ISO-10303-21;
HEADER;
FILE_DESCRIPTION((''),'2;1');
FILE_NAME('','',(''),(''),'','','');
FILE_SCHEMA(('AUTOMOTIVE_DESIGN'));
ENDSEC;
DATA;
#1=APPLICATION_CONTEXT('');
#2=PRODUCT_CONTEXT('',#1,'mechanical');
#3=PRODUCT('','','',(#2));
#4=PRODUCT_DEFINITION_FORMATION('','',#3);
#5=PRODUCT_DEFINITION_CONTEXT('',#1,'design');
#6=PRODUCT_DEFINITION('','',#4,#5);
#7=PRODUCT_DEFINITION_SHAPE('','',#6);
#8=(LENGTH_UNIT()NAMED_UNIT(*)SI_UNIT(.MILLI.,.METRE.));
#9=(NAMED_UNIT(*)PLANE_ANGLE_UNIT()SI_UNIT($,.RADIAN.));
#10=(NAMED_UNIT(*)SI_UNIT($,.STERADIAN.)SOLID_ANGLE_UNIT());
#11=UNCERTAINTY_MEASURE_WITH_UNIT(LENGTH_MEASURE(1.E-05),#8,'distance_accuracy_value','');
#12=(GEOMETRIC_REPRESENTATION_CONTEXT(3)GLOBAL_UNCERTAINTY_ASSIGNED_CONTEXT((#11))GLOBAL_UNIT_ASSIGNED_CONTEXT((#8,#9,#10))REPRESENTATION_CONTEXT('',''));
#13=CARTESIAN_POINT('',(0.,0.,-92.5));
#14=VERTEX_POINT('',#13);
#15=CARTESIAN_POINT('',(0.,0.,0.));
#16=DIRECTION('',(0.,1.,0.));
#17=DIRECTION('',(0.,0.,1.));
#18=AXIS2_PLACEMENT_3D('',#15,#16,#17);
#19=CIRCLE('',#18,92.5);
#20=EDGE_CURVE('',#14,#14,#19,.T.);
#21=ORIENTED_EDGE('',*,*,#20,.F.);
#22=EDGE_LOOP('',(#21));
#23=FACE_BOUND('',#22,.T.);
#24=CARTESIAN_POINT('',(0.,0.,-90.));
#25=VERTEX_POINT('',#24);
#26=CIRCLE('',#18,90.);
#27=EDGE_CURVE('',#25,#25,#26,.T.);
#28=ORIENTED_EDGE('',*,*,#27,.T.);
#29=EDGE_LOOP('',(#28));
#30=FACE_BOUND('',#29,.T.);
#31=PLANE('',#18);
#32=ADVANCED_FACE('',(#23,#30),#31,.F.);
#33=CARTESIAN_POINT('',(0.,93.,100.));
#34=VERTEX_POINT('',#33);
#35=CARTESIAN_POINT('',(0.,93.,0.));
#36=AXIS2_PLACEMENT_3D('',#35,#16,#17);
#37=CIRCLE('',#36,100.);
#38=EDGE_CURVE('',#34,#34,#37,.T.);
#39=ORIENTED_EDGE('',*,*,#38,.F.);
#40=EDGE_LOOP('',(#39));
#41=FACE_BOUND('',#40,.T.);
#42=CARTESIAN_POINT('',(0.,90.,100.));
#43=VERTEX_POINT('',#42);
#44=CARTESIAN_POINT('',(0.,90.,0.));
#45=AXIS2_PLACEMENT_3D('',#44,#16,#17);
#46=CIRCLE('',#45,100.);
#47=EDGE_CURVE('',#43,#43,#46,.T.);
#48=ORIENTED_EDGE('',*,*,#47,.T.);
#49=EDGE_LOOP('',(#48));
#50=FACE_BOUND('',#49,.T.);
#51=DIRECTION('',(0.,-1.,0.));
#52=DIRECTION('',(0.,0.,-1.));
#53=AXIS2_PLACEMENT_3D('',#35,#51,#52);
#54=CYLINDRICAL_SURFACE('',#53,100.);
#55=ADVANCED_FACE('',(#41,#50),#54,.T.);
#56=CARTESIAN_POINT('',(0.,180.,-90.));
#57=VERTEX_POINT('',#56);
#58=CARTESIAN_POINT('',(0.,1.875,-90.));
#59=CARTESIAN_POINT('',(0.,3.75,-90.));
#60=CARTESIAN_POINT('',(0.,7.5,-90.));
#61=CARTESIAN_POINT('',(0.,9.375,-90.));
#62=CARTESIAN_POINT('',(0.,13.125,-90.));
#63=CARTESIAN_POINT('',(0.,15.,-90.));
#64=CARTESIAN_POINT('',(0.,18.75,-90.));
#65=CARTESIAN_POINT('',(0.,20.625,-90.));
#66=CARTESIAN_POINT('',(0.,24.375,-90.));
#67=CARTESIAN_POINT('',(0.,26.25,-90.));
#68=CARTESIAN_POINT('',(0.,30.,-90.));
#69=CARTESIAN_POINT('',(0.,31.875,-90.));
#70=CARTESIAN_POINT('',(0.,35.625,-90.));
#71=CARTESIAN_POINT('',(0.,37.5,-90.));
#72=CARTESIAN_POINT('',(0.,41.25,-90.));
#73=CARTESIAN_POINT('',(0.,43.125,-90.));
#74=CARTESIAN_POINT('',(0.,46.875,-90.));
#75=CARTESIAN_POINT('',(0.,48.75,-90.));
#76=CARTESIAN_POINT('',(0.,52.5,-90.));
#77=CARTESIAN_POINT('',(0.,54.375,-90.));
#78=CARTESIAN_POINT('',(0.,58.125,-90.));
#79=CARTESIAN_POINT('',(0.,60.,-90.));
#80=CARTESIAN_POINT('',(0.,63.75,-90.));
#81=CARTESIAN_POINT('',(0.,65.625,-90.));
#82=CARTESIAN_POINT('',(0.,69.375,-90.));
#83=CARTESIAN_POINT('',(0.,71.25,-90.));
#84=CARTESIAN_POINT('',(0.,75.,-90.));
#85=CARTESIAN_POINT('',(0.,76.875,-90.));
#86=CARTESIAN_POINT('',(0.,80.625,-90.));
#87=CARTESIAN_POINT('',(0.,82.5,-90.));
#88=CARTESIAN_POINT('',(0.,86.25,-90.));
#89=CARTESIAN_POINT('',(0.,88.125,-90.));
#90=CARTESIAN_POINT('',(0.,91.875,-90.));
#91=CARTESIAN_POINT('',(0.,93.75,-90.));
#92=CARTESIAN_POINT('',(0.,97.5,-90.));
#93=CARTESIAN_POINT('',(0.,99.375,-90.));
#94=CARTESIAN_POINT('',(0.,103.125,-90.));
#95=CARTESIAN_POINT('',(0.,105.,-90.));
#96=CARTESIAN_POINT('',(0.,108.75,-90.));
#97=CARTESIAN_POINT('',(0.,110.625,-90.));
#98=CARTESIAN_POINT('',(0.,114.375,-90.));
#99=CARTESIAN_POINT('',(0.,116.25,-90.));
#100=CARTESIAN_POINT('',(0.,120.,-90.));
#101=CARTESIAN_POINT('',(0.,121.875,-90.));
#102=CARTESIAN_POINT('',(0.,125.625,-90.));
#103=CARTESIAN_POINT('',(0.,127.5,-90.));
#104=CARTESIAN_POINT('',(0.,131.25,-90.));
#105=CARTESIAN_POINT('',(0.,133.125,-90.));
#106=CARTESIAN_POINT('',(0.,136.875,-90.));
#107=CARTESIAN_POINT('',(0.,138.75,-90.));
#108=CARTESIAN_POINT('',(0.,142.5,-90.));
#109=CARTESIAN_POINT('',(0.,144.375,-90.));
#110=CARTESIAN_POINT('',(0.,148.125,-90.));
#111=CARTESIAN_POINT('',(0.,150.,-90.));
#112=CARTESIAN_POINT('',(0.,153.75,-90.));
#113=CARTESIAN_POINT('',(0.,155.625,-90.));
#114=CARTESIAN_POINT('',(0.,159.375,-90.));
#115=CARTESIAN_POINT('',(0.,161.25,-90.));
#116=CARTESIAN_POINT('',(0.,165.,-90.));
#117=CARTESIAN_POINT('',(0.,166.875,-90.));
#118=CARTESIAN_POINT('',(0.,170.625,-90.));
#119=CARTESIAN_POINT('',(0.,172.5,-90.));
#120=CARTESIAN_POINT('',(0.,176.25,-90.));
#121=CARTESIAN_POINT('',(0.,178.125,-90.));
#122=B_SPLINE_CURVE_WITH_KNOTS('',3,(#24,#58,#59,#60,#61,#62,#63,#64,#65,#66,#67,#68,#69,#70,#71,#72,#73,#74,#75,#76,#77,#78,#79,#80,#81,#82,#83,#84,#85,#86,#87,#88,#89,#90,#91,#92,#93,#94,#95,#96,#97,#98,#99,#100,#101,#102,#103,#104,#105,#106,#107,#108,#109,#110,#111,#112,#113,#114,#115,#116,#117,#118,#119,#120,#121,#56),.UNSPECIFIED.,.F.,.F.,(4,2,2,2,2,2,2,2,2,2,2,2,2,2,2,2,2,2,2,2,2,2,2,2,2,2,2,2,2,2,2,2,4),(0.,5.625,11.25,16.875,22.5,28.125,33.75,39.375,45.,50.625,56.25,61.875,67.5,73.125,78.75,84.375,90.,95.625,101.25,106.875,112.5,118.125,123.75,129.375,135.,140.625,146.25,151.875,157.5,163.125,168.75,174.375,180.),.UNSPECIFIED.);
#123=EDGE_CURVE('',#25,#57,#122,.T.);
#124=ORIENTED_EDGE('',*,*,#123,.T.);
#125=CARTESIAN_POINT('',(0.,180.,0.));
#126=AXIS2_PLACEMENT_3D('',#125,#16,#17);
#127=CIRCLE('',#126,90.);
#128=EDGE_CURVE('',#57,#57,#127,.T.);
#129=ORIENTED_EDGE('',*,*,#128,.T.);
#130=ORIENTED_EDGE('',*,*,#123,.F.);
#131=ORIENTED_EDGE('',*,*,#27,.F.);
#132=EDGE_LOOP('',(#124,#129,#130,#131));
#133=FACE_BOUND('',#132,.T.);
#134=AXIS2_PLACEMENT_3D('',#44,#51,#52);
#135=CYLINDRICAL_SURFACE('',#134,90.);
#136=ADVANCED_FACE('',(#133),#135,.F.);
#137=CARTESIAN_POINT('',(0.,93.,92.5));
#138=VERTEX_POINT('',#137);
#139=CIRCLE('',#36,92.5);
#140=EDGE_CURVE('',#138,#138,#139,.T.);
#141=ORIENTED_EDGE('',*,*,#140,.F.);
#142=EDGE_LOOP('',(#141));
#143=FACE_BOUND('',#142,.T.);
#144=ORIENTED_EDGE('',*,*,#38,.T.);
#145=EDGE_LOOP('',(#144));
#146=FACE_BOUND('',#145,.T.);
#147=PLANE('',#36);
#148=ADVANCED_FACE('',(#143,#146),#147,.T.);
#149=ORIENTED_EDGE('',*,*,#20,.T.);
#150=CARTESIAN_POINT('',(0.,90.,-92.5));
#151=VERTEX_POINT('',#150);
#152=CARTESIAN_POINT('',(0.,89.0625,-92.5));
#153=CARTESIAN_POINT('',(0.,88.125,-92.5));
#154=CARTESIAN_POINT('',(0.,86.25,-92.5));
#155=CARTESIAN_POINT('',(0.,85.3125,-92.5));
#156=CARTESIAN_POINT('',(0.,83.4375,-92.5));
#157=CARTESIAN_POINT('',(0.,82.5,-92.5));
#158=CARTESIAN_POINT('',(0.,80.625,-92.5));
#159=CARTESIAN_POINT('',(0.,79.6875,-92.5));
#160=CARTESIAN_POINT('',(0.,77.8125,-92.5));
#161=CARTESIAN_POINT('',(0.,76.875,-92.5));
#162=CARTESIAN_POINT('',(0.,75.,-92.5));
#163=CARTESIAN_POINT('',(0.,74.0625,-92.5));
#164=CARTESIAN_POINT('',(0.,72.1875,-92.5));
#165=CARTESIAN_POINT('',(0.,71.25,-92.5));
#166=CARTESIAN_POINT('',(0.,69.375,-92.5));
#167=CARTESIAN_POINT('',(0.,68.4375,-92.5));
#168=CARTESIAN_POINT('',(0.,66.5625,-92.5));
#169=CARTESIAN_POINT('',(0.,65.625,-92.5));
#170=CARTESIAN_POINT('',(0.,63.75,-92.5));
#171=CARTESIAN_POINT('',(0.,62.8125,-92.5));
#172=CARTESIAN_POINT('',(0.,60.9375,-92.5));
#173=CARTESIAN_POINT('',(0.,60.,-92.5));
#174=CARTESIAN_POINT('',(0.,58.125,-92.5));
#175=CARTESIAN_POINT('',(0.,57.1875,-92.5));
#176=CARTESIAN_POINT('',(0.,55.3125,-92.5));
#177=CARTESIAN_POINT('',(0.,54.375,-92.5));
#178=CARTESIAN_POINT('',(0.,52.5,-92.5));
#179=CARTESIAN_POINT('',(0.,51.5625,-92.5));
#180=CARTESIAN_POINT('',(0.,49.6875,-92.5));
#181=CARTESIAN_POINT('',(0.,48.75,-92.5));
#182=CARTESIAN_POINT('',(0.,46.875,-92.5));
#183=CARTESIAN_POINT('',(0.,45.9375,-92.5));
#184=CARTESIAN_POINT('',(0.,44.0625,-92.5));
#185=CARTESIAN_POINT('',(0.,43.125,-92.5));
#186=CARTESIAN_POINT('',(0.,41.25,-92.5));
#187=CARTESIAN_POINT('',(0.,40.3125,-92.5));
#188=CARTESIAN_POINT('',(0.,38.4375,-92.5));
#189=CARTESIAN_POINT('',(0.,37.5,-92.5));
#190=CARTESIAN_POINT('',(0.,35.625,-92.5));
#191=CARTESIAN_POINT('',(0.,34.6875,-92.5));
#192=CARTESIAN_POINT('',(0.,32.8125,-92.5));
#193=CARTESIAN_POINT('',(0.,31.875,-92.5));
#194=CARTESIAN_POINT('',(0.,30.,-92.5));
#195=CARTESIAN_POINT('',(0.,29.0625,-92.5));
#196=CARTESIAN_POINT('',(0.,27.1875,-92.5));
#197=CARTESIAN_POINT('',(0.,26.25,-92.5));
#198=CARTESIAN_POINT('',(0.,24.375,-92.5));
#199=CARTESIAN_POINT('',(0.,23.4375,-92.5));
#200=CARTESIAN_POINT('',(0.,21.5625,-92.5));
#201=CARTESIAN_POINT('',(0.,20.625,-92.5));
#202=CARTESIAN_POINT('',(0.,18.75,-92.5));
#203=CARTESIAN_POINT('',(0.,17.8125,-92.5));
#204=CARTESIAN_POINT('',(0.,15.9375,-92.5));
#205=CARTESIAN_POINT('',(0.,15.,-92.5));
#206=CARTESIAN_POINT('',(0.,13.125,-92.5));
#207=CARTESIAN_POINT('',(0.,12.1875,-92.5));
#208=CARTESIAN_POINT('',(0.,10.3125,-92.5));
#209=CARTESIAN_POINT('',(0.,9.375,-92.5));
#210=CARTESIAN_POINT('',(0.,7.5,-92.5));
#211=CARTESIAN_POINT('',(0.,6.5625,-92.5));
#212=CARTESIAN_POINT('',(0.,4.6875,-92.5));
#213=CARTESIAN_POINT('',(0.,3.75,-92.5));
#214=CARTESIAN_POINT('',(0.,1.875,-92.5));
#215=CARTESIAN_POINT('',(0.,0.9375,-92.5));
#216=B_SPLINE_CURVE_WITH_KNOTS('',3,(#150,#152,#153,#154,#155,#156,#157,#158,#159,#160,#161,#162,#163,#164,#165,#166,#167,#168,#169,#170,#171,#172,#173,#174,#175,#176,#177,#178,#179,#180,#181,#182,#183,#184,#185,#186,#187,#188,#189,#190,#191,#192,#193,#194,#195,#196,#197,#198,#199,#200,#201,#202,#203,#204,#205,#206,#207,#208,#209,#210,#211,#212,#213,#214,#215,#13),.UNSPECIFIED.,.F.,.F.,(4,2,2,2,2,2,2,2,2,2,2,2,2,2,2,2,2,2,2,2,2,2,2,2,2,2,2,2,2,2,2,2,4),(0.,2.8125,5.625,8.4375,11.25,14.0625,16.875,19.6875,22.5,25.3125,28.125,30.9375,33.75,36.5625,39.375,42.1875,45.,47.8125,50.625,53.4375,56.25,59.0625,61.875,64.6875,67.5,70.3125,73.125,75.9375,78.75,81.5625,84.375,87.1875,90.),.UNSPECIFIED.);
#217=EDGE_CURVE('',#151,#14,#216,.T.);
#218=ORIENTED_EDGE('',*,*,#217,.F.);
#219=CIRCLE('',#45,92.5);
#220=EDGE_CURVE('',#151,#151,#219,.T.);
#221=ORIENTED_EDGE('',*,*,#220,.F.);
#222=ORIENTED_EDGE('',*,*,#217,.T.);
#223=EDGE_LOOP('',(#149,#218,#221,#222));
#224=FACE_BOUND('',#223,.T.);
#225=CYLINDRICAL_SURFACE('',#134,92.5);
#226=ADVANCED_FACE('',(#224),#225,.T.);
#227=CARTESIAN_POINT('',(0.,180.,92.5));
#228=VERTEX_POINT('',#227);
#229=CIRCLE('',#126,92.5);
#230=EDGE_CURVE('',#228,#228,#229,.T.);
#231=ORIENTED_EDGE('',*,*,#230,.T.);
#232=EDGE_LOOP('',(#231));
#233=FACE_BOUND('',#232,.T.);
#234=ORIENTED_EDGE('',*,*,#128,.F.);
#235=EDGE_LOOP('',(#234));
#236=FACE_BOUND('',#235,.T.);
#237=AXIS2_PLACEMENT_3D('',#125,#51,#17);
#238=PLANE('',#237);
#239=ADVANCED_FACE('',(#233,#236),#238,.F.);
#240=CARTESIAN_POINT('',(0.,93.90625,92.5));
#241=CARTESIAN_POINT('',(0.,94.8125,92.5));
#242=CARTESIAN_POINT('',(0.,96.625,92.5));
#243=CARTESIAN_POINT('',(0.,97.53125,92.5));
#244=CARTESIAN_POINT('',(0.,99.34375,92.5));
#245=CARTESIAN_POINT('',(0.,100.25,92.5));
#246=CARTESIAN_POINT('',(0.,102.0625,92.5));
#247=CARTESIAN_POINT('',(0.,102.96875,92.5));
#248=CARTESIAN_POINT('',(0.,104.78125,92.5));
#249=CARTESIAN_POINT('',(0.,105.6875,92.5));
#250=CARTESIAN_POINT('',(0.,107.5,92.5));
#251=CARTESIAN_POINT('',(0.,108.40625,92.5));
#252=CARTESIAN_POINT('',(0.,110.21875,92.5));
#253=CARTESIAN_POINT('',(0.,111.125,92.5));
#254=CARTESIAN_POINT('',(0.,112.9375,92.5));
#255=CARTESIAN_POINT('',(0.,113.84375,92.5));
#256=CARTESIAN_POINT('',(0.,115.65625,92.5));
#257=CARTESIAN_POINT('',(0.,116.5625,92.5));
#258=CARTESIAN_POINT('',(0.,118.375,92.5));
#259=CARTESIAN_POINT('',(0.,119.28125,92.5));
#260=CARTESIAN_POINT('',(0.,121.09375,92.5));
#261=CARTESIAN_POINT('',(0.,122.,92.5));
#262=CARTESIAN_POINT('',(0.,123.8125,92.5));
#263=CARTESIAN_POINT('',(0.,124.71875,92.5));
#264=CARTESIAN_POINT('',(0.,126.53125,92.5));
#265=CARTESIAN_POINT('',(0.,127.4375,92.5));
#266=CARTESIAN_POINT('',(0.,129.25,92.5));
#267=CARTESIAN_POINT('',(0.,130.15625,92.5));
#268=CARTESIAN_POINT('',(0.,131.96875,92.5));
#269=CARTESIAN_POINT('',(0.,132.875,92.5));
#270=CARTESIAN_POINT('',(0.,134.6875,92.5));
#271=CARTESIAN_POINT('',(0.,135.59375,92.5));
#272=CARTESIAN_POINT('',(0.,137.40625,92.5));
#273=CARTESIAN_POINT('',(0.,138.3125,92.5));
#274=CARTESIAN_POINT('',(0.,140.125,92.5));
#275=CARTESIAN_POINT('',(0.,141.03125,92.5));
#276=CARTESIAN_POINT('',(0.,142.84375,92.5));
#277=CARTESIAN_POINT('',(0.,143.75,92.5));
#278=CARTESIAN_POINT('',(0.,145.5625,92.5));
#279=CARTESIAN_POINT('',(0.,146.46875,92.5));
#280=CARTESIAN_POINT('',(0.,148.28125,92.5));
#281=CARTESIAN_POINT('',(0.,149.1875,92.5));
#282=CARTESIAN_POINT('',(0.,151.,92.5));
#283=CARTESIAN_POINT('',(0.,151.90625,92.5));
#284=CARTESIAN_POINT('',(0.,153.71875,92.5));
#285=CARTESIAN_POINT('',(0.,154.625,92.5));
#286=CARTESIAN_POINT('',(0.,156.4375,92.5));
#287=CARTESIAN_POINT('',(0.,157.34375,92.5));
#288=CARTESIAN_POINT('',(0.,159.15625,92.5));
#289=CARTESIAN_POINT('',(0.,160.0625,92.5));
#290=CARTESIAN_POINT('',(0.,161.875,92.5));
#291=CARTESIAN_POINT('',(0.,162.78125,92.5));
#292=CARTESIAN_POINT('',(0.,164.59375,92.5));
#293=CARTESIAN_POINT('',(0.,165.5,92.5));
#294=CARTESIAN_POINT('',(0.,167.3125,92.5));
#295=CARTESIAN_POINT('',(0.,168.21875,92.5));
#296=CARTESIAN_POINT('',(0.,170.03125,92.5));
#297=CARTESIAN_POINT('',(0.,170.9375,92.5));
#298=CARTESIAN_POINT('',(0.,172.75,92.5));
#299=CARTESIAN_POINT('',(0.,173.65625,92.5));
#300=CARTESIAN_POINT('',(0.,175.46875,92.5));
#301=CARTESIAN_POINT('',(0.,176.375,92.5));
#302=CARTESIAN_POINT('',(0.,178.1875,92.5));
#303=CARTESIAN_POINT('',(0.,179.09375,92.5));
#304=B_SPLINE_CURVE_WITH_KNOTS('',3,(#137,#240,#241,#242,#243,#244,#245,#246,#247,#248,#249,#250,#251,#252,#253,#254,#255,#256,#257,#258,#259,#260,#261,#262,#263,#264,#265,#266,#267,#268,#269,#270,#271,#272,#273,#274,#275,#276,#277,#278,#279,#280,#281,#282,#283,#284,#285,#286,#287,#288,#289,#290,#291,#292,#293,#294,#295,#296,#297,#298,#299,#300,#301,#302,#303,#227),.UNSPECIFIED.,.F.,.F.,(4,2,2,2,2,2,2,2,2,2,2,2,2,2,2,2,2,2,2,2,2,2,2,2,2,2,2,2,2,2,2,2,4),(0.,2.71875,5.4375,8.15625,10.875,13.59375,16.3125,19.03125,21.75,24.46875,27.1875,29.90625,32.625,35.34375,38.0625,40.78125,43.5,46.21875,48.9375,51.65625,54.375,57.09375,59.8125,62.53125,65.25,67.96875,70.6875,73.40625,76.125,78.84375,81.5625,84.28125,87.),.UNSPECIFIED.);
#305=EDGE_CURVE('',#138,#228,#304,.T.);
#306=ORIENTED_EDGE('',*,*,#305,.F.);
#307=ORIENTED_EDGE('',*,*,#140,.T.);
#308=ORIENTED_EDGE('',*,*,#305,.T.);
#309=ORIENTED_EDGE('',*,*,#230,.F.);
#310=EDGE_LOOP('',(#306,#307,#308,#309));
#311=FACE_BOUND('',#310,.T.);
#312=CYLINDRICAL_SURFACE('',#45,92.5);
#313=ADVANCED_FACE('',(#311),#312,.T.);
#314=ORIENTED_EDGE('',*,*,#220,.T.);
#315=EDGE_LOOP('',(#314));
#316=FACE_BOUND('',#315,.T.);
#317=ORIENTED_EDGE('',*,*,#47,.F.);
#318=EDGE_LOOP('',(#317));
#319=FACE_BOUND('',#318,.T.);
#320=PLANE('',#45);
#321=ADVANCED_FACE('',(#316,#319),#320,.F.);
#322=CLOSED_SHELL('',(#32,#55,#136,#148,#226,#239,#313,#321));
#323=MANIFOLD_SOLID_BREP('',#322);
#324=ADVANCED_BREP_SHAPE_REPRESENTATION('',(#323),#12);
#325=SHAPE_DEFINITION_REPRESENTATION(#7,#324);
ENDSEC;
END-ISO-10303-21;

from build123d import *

# Parameters (mm, degrees)
SKETCH1_R           = 92.5
SKETCH1_R_2         = 90
BOSS_EXTRUDE1_DEPTH = 90
SKETCH2_R           = 100
SKETCH2_R_2         = 90
BOSS_EXTRUDE2_DEPTH = 3
MIRROR1_START       = 93
MIRROR1_OUTLINE_R   = 92.5
MIRROR1_OUTLINE_R_2 = 90
MIRROR1_DEPTH       = 87


# Read off the part's stored shape, not the designer's step: Mirror1
with BuildPart() as part:
    # Sketch1 → Boss-Extrude1 (new body)
    with BuildSketch(Plane(origin=(0, 0, 0), x_dir=(1, 0, 0), z_dir=(0, 1, 0))):
        with Locations(Location((0, 0, 0), (0, 0, 90))):
            Circle(SKETCH1_R)
        with Locations(Location((0, 0, 0), (0, 0, 90))):
            Circle(SKETCH1_R_2, mode=Mode.SUBTRACT)
    extrude(amount=BOSS_EXTRUDE1_DEPTH)

    # Sketch2 → Boss-Extrude2 (add)
    with BuildSketch(Plane(origin=(0, 90, 0), x_dir=(1, 0, 0), z_dir=(0, 1, 0))):
        with Locations(Location((0, 0, 0), (0, 0, 270))):
            Circle(SKETCH2_R)
        with Locations(Location((0, 0, 0), (0, 0, 90))):
            Circle(SKETCH2_R_2, mode=Mode.SUBTRACT)
    extrude(amount=BOSS_EXTRUDE2_DEPTH)

    # Mirror1 outline → Mirror1 (add)
    with BuildSketch(Plane(origin=(0, 0, 0), x_dir=(1, 0, 0), z_dir=(0, 1, 0)).offset(MIRROR1_START)):
        Circle(MIRROR1_OUTLINE_R)
        Circle(MIRROR1_OUTLINE_R_2, mode=Mode.SUBTRACT)
    extrude(amount=MIRROR1_DEPTH)


solid = part.part
